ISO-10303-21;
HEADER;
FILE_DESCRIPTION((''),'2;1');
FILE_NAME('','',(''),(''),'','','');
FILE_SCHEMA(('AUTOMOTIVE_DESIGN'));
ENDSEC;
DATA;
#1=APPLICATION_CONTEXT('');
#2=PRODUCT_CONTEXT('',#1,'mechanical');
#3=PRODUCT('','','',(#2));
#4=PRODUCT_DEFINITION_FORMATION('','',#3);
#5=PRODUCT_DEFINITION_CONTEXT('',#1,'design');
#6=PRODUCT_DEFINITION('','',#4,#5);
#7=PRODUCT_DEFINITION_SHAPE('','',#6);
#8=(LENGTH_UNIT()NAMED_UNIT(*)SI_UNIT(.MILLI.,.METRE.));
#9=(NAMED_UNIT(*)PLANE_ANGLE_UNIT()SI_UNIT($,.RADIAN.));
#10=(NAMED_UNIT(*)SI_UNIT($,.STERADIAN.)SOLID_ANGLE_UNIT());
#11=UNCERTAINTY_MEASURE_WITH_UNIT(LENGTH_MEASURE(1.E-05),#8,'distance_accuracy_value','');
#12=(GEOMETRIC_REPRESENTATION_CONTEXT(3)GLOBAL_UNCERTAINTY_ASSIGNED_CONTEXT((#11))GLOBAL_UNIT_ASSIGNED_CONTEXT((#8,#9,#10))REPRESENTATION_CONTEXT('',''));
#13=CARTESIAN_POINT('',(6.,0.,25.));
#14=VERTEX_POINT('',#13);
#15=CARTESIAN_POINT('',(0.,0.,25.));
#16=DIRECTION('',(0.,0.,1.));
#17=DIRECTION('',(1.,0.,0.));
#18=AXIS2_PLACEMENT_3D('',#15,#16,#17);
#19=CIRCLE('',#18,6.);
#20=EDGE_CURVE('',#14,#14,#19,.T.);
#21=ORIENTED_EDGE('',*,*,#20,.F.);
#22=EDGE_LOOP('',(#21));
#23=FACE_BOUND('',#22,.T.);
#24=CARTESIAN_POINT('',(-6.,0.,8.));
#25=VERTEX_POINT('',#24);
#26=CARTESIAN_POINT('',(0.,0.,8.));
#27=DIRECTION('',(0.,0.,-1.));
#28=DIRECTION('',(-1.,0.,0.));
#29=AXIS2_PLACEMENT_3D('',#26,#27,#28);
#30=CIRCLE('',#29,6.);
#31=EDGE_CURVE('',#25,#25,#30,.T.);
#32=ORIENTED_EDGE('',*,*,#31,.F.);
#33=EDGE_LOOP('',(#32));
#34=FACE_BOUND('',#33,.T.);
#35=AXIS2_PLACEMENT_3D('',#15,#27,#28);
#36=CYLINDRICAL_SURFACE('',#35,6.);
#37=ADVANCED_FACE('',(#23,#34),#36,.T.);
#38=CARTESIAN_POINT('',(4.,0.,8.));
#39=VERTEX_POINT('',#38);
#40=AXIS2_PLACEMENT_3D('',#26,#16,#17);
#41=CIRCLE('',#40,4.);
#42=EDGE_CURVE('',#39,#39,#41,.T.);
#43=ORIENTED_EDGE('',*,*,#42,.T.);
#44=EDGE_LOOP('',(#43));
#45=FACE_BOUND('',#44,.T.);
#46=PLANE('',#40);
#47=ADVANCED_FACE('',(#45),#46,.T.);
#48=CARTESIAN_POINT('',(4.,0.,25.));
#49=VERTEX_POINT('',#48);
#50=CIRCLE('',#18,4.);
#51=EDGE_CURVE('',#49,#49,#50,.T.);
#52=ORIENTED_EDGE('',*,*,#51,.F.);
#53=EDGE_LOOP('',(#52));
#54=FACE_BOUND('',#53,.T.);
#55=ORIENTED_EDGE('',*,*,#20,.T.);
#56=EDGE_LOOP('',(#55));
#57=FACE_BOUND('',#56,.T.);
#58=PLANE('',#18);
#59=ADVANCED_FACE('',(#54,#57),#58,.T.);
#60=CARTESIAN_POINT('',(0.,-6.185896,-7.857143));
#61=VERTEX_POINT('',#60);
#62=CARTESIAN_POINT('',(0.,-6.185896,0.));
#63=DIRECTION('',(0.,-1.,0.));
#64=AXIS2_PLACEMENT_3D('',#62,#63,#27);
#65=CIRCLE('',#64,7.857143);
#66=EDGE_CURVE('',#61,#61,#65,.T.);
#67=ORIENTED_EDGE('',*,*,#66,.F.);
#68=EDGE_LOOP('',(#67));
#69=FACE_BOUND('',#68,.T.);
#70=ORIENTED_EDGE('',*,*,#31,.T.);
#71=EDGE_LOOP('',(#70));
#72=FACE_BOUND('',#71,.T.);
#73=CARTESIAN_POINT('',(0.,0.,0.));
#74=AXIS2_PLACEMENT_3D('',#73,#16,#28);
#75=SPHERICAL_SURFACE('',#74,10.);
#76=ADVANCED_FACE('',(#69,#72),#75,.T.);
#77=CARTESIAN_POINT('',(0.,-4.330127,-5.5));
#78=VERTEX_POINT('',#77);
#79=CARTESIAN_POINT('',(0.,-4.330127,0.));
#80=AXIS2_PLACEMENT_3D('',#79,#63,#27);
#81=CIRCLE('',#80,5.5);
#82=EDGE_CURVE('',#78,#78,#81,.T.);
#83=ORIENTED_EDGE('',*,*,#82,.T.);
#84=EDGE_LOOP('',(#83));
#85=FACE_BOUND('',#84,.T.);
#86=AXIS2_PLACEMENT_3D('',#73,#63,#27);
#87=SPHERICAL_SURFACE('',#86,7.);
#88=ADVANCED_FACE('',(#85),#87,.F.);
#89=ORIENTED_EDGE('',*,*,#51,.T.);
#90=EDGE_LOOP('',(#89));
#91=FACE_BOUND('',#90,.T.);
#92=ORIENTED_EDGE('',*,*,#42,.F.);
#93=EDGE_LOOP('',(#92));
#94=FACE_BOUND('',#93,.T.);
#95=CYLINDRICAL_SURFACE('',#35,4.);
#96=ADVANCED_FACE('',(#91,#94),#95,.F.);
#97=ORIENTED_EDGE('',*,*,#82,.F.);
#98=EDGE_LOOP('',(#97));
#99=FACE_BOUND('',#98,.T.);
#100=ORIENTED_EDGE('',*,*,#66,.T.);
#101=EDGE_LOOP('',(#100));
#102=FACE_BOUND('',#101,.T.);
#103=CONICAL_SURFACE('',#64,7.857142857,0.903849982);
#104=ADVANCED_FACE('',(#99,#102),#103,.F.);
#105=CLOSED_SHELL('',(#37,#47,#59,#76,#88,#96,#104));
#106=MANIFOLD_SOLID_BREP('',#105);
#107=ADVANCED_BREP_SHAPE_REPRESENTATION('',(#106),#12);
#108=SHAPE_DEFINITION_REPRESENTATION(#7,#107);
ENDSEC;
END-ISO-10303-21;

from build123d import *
from OCP.BRepAlgoAPI import BRepAlgoAPI_Cut
from OCP.TopTools import TopTools_ListOfShape

# Parameters (mm, degrees)
SKETCH_1_R          = 6
SKETCH_1_R_2        = 4
EXTRUDE_1_DEPTH     = 25
CUT_EXTRUDE_START   = -17
SKETCH_3_R          = 4
CUT_EXTRUDE_2_DEPTH = 17


with BuildPart() as part:
    # 草图1 → 凸台-拉伸1 (new body)
    with BuildSketch(Plane.XY):
        Circle(SKETCH_1_R)
        Circle(SKETCH_1_R_2, mode=Mode.SUBTRACT)
    extrude(amount=EXTRUDE_1_DEPTH)

    # 草图2 → 旋转3 (revolve)
    with BuildSketch(Plane(origin=(0, 0, 0), x_dir=(1, 0, 0), z_dir=(0, 1, 0))):
        with BuildLine():
            Line((0, 10), (0, -10))
            ThreePointArc((0, -10), (-10, 0), (0, 10))
        make_face()
    revolve(axis=Axis((0, 0, 0), (0, 0, -1)))

    # 草图3 → 切除-拉伸2 (cut)
    with BuildSketch(Plane.XY.offset(25).offset(CUT_EXTRUDE_START)):
        Circle(SKETCH_3_R)
    extrude(amount=CUT_EXTRUDE_2_DEPTH, mode=Mode.SUBTRACT)


with BuildPart() as cut_revolve_1_tool:
    # 草图4 → 切除-旋转1 (revolve)
    with BuildSketch(Plane(origin=(0, 0, 0), x_dir=(0, 0, -1), z_dir=(1, 0, 0))):
        with BuildLine():
            Line((0, 7), (0, -7))
            Line((0, -7), (0, -10))
            Line((0, -10), (6, -10))
            Line((6, -10), (7.857142857, -6.185895741))
            Line((7.857142857, -6.185895741), (5.5, -4.330127019))
            ThreePointArc((5.5, -4.330127019), (6.297256908, 3.056886559), (0, 7))
        make_face()
    revolve(axis=Axis((0, 0, 0), (0, 1, 0)))


with BuildPart() as part_1:
    add(part.part)

    # 切除-旋转1: cut by cut_revolve_1_tool, with a tolerance
    cut_revolve_1_stock = TopTools_ListOfShape()
    cut_revolve_1_stock.Append(part_1.part.wrapped)
    cut_revolve_1_tools = TopTools_ListOfShape()
    cut_revolve_1_tools.Append(cut_revolve_1_tool.part.wrapped)
    cut_revolve_1_cut = BRepAlgoAPI_Cut()
    cut_revolve_1_cut.SetArguments(cut_revolve_1_stock)
    cut_revolve_1_cut.SetTools(cut_revolve_1_tools)
    cut_revolve_1_cut.SetFuzzyValue(0.00001)
    cut_revolve_1_cut.Build()
    add(Compound.cast(cut_revolve_1_cut.Shape()).solids(), mode=Mode.REPLACE)


solid = part_1.part
